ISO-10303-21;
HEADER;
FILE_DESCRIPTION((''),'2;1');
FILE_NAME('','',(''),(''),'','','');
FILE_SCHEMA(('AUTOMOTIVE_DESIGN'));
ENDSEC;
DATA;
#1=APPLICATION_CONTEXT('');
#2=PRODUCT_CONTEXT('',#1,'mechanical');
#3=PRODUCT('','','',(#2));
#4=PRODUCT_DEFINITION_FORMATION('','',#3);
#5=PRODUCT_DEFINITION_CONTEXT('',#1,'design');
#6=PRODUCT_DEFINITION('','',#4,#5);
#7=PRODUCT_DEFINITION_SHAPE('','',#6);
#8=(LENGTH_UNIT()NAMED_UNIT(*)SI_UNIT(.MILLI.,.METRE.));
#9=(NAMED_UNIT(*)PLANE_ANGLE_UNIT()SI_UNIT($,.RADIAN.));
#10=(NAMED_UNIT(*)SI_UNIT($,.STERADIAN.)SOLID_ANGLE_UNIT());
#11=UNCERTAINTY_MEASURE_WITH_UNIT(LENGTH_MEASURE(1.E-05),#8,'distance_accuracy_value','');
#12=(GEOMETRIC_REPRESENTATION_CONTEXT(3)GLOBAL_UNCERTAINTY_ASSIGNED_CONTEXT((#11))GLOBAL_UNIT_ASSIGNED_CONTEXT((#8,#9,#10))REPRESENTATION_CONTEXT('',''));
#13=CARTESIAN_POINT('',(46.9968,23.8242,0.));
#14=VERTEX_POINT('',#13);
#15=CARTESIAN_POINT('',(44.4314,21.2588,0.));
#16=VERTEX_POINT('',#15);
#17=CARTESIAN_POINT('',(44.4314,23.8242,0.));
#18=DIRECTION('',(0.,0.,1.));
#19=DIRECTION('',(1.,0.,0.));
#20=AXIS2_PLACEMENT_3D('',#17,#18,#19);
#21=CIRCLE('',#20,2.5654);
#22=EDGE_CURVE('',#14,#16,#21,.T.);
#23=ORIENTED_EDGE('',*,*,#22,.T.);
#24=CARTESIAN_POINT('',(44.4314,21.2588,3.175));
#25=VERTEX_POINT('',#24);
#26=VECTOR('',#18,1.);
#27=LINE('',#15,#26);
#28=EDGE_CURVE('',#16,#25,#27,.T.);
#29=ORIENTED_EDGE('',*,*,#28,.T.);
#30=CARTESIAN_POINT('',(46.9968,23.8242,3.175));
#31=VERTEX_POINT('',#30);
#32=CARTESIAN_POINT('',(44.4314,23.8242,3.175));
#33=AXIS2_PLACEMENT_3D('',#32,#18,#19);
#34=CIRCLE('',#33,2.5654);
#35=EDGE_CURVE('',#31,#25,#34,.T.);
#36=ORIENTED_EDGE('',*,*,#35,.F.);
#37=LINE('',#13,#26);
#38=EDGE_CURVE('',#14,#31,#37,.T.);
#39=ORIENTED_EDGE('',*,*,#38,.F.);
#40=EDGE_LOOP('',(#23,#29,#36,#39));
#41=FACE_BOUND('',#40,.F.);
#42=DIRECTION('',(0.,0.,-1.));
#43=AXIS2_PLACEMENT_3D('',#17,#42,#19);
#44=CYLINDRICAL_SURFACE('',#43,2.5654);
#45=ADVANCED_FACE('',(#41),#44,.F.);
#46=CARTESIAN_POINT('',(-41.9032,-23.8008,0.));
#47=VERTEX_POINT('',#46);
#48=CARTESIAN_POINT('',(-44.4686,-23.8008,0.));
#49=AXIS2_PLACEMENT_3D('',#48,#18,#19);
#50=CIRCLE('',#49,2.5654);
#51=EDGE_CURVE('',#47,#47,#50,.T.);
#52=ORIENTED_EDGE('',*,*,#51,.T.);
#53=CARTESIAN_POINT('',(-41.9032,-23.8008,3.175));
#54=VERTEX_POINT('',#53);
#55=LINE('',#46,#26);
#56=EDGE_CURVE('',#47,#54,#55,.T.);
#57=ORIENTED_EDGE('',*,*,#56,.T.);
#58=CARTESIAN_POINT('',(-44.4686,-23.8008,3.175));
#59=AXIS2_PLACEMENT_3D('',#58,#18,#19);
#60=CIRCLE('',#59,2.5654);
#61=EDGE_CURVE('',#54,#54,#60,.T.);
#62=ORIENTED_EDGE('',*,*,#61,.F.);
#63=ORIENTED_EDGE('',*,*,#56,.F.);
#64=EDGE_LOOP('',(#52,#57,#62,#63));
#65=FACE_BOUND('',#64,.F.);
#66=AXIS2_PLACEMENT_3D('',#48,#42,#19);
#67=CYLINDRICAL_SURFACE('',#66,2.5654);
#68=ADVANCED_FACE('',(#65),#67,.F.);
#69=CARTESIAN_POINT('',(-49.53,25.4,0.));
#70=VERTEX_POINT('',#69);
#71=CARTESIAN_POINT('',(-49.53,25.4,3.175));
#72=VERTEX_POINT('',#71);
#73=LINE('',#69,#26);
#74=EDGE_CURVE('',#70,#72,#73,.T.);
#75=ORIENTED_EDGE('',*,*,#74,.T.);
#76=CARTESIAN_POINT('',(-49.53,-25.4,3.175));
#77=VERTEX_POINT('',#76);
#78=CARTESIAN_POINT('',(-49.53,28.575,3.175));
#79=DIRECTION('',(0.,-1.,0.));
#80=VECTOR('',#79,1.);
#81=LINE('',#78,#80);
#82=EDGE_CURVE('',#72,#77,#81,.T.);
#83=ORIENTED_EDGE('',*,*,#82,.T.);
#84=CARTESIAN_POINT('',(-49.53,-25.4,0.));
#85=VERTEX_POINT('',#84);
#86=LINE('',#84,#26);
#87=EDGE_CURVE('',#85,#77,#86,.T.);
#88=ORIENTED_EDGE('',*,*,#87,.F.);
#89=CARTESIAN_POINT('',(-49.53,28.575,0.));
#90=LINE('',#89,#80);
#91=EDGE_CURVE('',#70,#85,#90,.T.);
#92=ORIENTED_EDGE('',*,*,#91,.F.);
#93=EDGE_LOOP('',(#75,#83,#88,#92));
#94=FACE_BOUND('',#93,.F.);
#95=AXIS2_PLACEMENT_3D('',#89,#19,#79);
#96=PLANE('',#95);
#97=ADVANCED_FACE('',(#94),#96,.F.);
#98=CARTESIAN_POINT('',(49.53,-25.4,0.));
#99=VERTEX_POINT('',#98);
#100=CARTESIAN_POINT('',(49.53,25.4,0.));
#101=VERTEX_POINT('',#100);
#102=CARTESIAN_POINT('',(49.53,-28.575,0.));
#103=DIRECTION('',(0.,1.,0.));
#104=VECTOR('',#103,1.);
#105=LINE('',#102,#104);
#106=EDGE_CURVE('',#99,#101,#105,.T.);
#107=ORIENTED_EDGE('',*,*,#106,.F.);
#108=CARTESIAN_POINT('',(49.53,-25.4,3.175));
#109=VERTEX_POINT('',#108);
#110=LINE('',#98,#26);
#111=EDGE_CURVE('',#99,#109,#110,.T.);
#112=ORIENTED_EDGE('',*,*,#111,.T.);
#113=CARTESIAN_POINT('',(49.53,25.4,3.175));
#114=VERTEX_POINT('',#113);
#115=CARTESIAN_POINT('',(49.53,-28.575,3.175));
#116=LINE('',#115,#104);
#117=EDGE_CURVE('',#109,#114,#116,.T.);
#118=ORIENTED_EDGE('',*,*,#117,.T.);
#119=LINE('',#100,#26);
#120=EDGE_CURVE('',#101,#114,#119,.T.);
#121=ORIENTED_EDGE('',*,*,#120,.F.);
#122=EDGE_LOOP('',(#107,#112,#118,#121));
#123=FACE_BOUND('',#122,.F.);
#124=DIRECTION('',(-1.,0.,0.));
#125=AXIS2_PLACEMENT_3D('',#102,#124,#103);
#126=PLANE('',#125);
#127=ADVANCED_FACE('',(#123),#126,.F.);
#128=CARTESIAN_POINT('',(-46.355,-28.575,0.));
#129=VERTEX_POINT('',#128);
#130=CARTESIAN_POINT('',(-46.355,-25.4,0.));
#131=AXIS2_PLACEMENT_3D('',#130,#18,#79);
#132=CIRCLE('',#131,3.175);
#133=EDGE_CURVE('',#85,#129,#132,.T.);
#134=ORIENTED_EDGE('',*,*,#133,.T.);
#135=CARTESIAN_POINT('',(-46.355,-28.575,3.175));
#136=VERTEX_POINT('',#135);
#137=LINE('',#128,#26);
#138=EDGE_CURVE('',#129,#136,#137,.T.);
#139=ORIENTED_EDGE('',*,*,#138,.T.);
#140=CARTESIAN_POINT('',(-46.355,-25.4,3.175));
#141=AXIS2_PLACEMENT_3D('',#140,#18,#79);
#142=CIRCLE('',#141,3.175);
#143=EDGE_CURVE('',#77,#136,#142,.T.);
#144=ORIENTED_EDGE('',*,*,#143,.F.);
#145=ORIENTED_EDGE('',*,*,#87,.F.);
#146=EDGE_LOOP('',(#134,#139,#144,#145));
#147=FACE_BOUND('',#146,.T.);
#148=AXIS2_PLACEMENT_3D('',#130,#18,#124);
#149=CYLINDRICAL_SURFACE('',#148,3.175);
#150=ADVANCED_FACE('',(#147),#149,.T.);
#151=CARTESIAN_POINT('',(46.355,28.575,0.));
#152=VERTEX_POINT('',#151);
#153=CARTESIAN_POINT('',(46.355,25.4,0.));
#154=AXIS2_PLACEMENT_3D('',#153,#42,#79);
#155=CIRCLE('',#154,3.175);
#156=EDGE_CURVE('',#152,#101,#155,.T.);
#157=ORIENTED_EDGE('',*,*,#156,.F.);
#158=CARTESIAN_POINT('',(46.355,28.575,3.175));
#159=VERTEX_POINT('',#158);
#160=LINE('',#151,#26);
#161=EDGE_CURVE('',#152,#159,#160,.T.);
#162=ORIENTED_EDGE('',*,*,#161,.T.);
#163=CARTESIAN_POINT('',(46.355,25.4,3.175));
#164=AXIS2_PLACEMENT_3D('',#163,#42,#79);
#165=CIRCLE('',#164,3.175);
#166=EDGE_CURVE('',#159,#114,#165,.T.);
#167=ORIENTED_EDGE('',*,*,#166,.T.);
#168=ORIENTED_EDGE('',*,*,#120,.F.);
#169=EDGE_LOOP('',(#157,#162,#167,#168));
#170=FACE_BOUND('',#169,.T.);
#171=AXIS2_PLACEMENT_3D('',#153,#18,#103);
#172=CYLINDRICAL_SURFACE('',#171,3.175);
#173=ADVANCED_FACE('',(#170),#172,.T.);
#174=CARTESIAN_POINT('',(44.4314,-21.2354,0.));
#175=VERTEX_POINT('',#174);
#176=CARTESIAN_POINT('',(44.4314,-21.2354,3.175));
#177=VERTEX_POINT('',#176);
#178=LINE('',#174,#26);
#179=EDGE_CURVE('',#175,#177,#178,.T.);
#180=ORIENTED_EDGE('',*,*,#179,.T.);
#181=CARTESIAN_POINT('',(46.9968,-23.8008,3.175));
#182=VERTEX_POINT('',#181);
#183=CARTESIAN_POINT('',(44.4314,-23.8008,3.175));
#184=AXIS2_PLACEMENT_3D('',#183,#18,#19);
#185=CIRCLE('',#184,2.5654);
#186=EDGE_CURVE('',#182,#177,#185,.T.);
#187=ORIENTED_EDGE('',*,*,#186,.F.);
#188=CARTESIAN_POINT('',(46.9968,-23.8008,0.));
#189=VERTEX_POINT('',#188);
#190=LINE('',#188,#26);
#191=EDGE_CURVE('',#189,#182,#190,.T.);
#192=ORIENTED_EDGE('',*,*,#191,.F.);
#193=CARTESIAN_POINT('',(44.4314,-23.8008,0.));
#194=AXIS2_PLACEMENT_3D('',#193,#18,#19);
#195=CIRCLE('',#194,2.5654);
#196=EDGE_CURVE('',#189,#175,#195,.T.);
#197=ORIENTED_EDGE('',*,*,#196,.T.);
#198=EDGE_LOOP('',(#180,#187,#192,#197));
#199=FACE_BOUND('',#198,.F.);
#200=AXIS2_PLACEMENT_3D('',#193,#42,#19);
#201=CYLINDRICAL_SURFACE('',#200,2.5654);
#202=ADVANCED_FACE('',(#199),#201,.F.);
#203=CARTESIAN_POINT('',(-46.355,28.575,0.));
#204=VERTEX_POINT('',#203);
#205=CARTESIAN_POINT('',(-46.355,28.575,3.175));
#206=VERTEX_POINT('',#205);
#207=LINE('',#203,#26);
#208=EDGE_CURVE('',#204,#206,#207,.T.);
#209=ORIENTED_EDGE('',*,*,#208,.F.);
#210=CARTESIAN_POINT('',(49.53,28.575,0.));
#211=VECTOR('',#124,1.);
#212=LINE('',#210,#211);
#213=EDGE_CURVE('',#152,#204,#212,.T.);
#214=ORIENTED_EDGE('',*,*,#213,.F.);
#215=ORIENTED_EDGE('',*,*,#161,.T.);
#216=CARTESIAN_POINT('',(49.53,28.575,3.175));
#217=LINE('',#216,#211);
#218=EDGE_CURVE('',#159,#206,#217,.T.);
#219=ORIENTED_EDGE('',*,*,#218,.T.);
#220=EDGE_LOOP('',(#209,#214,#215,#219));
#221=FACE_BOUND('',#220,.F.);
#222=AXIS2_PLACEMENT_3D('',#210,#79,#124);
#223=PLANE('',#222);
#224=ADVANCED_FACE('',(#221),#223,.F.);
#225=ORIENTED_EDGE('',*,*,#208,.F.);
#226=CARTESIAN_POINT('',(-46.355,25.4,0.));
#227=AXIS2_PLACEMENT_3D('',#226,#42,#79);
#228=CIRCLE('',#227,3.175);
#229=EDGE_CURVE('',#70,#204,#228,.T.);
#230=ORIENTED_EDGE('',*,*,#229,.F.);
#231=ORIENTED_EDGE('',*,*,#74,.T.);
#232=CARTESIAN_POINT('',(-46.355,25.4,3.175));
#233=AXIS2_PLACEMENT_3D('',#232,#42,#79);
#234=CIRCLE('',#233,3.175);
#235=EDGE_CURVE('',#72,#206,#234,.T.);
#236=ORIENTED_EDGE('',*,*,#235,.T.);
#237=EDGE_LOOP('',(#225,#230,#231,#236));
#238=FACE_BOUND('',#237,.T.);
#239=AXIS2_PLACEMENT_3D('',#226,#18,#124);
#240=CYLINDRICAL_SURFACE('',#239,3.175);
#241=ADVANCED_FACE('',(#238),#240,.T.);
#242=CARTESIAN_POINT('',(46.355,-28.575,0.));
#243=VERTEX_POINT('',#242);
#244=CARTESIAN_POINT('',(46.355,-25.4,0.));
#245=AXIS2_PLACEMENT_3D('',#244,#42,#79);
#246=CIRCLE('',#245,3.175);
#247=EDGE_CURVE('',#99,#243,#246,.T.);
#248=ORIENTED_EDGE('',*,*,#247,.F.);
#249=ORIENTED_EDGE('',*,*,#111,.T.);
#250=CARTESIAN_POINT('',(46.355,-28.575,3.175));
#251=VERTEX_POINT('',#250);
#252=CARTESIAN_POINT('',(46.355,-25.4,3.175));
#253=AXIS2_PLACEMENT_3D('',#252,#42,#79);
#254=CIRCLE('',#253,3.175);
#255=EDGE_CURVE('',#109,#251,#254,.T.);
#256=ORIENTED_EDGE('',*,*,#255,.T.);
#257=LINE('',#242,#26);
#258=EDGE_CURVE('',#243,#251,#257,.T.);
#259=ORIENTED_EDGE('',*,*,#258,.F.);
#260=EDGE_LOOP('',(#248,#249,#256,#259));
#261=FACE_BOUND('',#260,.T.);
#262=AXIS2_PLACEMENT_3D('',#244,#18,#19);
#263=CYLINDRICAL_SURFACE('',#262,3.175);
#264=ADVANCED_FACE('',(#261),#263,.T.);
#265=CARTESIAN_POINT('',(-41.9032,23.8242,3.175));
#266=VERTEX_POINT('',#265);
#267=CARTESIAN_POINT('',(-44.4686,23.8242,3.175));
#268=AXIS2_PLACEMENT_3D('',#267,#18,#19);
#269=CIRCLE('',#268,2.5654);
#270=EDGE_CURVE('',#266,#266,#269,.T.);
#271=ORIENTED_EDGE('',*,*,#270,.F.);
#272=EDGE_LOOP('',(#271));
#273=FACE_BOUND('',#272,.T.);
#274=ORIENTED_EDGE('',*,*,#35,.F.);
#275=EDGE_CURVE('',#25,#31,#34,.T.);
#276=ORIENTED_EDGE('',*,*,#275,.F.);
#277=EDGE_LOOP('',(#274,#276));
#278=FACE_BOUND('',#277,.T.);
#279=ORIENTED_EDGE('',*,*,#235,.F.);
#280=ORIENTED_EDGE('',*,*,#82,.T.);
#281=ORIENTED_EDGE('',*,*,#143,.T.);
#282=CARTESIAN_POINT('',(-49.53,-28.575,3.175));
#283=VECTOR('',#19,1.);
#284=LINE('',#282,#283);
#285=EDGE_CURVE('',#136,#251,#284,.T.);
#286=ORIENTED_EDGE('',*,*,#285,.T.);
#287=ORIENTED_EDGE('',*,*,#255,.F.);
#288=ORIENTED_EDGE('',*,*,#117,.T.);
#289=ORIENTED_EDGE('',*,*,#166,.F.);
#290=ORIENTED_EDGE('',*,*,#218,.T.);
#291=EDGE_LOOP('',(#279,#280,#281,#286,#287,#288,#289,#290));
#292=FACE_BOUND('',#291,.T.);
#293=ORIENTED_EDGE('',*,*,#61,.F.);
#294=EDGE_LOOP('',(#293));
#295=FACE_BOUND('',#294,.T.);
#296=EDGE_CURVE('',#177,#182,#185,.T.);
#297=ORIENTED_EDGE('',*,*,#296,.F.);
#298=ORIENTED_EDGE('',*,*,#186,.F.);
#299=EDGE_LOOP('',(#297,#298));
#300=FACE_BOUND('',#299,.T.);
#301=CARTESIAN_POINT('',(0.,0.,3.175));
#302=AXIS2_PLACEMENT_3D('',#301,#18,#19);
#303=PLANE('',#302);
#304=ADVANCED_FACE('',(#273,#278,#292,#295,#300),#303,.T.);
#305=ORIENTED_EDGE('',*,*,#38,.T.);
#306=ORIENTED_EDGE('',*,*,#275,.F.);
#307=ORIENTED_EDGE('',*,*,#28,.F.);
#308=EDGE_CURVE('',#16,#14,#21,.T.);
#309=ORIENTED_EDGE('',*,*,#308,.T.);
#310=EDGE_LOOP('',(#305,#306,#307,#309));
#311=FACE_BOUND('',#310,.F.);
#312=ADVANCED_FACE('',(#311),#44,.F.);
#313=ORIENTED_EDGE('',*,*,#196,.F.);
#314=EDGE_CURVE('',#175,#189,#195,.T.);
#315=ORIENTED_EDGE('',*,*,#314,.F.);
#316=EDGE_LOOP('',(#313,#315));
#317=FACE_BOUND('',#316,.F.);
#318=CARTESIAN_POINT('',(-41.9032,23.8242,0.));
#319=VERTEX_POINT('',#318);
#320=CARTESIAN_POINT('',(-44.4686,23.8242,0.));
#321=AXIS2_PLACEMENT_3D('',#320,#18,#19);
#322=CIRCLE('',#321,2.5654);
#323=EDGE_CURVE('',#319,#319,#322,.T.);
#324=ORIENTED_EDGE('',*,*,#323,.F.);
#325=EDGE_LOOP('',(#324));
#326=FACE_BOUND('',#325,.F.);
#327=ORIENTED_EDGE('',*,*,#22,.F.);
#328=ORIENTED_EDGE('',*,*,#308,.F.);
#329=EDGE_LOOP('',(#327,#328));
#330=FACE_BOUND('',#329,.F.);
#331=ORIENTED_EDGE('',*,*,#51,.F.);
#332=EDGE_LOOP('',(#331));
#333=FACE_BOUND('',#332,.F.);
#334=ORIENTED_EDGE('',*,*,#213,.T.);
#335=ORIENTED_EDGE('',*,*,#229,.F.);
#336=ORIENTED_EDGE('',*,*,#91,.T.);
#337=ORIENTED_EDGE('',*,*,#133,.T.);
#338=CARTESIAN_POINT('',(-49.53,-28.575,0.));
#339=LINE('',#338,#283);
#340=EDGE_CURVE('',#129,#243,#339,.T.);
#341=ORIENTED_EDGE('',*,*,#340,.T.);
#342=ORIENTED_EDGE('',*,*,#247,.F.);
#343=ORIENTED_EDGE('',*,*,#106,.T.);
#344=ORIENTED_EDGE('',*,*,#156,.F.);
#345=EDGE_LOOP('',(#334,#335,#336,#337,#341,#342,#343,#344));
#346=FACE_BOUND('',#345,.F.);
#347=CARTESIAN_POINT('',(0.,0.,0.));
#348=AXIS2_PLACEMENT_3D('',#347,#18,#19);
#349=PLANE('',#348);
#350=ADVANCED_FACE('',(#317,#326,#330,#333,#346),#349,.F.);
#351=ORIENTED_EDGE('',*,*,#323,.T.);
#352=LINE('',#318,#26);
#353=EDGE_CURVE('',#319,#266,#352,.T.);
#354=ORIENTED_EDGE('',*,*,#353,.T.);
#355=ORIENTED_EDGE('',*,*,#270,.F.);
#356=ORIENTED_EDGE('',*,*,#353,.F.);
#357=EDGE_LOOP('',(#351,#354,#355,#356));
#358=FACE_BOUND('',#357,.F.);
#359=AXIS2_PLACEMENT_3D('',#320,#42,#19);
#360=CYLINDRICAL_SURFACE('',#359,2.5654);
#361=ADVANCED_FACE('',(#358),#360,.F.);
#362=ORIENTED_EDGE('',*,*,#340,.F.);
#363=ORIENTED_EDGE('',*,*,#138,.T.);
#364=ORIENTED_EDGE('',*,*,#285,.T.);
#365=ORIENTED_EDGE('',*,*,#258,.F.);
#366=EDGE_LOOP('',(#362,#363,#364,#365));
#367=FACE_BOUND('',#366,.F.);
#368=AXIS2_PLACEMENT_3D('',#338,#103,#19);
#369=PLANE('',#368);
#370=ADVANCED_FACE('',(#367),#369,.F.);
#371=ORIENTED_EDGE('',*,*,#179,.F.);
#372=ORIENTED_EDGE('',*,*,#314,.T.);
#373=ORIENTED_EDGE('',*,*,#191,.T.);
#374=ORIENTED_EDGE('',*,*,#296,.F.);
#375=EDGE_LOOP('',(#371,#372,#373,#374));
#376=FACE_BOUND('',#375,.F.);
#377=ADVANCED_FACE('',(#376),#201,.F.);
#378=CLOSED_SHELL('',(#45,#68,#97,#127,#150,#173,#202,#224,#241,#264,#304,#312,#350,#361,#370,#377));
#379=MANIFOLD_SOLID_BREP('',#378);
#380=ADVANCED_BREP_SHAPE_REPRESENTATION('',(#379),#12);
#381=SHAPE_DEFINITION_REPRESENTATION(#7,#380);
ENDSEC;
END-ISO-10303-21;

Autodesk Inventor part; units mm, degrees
ref_plane "YZ Plane" through (0, 0, 0) normal (1, 0, 0) x (0, 1, 0)
ref_plane "XZ Plane" through (0, 0, 0) normal (0, 1, 0) x (-1, 0, 0)
ref_plane "XY Plane" through (0, 0, 0) normal (0, 0, 1) x (1, 0, 0)
sketch "Sketch1" plane through (0, 0, 0) normal (0, 0, 1) x (1, 0, 0)
  circle A0 centre (-44.4686, 23.8242) radius 2.5654
  circle A1 centre (44.4314, 23.8242) radius 2.5654
  line L0 (0, 25.1324) -> (0, 21.8881) construction
  circle A2 centre (-44.4686, -23.8008) radius 2.5654
  circle A3 centre (44.4314, -23.8008) radius 2.5654
  line L1 (44.4314, 23.8242) -> (44.4314, -23.8008)
  line L2 (-49.53, -28.575) -> (49.53, -28.575)
  line L3 (49.53, -28.575) -> (49.53, 28.575)
  line L4 (49.53, 28.575) -> (-49.53, 28.575)
  line L5 (-49.53, 28.575) -> (-49.53, -28.575)
  line L6 (-49.53, -28.575) -> (49.53, 28.575) construction
  line L7 (49.53, -28.575) -> (-49.53, 28.575) construction
  point P0 (0, 0)
  dimension "d0" = 5.1308
  dimension "d1" = 5.1308
  dimension "d2" = 88.9
  dimension "d5" = 47.625
  dimension "d10" = 99.06
  dimension "d11" = 57.15
extrude "Extrusion1" add sketch "Sketch1" along normal blind 3.175
fillet "Fillet1" radius 3.175 4 edges at (-49.53, 28.575, 1.5875) (49.53, 28.575, 1.5875) (49.53, -28.575, 1.5875) (-49.53, -28.575, 1.5875)
properties part number "Limelight"
